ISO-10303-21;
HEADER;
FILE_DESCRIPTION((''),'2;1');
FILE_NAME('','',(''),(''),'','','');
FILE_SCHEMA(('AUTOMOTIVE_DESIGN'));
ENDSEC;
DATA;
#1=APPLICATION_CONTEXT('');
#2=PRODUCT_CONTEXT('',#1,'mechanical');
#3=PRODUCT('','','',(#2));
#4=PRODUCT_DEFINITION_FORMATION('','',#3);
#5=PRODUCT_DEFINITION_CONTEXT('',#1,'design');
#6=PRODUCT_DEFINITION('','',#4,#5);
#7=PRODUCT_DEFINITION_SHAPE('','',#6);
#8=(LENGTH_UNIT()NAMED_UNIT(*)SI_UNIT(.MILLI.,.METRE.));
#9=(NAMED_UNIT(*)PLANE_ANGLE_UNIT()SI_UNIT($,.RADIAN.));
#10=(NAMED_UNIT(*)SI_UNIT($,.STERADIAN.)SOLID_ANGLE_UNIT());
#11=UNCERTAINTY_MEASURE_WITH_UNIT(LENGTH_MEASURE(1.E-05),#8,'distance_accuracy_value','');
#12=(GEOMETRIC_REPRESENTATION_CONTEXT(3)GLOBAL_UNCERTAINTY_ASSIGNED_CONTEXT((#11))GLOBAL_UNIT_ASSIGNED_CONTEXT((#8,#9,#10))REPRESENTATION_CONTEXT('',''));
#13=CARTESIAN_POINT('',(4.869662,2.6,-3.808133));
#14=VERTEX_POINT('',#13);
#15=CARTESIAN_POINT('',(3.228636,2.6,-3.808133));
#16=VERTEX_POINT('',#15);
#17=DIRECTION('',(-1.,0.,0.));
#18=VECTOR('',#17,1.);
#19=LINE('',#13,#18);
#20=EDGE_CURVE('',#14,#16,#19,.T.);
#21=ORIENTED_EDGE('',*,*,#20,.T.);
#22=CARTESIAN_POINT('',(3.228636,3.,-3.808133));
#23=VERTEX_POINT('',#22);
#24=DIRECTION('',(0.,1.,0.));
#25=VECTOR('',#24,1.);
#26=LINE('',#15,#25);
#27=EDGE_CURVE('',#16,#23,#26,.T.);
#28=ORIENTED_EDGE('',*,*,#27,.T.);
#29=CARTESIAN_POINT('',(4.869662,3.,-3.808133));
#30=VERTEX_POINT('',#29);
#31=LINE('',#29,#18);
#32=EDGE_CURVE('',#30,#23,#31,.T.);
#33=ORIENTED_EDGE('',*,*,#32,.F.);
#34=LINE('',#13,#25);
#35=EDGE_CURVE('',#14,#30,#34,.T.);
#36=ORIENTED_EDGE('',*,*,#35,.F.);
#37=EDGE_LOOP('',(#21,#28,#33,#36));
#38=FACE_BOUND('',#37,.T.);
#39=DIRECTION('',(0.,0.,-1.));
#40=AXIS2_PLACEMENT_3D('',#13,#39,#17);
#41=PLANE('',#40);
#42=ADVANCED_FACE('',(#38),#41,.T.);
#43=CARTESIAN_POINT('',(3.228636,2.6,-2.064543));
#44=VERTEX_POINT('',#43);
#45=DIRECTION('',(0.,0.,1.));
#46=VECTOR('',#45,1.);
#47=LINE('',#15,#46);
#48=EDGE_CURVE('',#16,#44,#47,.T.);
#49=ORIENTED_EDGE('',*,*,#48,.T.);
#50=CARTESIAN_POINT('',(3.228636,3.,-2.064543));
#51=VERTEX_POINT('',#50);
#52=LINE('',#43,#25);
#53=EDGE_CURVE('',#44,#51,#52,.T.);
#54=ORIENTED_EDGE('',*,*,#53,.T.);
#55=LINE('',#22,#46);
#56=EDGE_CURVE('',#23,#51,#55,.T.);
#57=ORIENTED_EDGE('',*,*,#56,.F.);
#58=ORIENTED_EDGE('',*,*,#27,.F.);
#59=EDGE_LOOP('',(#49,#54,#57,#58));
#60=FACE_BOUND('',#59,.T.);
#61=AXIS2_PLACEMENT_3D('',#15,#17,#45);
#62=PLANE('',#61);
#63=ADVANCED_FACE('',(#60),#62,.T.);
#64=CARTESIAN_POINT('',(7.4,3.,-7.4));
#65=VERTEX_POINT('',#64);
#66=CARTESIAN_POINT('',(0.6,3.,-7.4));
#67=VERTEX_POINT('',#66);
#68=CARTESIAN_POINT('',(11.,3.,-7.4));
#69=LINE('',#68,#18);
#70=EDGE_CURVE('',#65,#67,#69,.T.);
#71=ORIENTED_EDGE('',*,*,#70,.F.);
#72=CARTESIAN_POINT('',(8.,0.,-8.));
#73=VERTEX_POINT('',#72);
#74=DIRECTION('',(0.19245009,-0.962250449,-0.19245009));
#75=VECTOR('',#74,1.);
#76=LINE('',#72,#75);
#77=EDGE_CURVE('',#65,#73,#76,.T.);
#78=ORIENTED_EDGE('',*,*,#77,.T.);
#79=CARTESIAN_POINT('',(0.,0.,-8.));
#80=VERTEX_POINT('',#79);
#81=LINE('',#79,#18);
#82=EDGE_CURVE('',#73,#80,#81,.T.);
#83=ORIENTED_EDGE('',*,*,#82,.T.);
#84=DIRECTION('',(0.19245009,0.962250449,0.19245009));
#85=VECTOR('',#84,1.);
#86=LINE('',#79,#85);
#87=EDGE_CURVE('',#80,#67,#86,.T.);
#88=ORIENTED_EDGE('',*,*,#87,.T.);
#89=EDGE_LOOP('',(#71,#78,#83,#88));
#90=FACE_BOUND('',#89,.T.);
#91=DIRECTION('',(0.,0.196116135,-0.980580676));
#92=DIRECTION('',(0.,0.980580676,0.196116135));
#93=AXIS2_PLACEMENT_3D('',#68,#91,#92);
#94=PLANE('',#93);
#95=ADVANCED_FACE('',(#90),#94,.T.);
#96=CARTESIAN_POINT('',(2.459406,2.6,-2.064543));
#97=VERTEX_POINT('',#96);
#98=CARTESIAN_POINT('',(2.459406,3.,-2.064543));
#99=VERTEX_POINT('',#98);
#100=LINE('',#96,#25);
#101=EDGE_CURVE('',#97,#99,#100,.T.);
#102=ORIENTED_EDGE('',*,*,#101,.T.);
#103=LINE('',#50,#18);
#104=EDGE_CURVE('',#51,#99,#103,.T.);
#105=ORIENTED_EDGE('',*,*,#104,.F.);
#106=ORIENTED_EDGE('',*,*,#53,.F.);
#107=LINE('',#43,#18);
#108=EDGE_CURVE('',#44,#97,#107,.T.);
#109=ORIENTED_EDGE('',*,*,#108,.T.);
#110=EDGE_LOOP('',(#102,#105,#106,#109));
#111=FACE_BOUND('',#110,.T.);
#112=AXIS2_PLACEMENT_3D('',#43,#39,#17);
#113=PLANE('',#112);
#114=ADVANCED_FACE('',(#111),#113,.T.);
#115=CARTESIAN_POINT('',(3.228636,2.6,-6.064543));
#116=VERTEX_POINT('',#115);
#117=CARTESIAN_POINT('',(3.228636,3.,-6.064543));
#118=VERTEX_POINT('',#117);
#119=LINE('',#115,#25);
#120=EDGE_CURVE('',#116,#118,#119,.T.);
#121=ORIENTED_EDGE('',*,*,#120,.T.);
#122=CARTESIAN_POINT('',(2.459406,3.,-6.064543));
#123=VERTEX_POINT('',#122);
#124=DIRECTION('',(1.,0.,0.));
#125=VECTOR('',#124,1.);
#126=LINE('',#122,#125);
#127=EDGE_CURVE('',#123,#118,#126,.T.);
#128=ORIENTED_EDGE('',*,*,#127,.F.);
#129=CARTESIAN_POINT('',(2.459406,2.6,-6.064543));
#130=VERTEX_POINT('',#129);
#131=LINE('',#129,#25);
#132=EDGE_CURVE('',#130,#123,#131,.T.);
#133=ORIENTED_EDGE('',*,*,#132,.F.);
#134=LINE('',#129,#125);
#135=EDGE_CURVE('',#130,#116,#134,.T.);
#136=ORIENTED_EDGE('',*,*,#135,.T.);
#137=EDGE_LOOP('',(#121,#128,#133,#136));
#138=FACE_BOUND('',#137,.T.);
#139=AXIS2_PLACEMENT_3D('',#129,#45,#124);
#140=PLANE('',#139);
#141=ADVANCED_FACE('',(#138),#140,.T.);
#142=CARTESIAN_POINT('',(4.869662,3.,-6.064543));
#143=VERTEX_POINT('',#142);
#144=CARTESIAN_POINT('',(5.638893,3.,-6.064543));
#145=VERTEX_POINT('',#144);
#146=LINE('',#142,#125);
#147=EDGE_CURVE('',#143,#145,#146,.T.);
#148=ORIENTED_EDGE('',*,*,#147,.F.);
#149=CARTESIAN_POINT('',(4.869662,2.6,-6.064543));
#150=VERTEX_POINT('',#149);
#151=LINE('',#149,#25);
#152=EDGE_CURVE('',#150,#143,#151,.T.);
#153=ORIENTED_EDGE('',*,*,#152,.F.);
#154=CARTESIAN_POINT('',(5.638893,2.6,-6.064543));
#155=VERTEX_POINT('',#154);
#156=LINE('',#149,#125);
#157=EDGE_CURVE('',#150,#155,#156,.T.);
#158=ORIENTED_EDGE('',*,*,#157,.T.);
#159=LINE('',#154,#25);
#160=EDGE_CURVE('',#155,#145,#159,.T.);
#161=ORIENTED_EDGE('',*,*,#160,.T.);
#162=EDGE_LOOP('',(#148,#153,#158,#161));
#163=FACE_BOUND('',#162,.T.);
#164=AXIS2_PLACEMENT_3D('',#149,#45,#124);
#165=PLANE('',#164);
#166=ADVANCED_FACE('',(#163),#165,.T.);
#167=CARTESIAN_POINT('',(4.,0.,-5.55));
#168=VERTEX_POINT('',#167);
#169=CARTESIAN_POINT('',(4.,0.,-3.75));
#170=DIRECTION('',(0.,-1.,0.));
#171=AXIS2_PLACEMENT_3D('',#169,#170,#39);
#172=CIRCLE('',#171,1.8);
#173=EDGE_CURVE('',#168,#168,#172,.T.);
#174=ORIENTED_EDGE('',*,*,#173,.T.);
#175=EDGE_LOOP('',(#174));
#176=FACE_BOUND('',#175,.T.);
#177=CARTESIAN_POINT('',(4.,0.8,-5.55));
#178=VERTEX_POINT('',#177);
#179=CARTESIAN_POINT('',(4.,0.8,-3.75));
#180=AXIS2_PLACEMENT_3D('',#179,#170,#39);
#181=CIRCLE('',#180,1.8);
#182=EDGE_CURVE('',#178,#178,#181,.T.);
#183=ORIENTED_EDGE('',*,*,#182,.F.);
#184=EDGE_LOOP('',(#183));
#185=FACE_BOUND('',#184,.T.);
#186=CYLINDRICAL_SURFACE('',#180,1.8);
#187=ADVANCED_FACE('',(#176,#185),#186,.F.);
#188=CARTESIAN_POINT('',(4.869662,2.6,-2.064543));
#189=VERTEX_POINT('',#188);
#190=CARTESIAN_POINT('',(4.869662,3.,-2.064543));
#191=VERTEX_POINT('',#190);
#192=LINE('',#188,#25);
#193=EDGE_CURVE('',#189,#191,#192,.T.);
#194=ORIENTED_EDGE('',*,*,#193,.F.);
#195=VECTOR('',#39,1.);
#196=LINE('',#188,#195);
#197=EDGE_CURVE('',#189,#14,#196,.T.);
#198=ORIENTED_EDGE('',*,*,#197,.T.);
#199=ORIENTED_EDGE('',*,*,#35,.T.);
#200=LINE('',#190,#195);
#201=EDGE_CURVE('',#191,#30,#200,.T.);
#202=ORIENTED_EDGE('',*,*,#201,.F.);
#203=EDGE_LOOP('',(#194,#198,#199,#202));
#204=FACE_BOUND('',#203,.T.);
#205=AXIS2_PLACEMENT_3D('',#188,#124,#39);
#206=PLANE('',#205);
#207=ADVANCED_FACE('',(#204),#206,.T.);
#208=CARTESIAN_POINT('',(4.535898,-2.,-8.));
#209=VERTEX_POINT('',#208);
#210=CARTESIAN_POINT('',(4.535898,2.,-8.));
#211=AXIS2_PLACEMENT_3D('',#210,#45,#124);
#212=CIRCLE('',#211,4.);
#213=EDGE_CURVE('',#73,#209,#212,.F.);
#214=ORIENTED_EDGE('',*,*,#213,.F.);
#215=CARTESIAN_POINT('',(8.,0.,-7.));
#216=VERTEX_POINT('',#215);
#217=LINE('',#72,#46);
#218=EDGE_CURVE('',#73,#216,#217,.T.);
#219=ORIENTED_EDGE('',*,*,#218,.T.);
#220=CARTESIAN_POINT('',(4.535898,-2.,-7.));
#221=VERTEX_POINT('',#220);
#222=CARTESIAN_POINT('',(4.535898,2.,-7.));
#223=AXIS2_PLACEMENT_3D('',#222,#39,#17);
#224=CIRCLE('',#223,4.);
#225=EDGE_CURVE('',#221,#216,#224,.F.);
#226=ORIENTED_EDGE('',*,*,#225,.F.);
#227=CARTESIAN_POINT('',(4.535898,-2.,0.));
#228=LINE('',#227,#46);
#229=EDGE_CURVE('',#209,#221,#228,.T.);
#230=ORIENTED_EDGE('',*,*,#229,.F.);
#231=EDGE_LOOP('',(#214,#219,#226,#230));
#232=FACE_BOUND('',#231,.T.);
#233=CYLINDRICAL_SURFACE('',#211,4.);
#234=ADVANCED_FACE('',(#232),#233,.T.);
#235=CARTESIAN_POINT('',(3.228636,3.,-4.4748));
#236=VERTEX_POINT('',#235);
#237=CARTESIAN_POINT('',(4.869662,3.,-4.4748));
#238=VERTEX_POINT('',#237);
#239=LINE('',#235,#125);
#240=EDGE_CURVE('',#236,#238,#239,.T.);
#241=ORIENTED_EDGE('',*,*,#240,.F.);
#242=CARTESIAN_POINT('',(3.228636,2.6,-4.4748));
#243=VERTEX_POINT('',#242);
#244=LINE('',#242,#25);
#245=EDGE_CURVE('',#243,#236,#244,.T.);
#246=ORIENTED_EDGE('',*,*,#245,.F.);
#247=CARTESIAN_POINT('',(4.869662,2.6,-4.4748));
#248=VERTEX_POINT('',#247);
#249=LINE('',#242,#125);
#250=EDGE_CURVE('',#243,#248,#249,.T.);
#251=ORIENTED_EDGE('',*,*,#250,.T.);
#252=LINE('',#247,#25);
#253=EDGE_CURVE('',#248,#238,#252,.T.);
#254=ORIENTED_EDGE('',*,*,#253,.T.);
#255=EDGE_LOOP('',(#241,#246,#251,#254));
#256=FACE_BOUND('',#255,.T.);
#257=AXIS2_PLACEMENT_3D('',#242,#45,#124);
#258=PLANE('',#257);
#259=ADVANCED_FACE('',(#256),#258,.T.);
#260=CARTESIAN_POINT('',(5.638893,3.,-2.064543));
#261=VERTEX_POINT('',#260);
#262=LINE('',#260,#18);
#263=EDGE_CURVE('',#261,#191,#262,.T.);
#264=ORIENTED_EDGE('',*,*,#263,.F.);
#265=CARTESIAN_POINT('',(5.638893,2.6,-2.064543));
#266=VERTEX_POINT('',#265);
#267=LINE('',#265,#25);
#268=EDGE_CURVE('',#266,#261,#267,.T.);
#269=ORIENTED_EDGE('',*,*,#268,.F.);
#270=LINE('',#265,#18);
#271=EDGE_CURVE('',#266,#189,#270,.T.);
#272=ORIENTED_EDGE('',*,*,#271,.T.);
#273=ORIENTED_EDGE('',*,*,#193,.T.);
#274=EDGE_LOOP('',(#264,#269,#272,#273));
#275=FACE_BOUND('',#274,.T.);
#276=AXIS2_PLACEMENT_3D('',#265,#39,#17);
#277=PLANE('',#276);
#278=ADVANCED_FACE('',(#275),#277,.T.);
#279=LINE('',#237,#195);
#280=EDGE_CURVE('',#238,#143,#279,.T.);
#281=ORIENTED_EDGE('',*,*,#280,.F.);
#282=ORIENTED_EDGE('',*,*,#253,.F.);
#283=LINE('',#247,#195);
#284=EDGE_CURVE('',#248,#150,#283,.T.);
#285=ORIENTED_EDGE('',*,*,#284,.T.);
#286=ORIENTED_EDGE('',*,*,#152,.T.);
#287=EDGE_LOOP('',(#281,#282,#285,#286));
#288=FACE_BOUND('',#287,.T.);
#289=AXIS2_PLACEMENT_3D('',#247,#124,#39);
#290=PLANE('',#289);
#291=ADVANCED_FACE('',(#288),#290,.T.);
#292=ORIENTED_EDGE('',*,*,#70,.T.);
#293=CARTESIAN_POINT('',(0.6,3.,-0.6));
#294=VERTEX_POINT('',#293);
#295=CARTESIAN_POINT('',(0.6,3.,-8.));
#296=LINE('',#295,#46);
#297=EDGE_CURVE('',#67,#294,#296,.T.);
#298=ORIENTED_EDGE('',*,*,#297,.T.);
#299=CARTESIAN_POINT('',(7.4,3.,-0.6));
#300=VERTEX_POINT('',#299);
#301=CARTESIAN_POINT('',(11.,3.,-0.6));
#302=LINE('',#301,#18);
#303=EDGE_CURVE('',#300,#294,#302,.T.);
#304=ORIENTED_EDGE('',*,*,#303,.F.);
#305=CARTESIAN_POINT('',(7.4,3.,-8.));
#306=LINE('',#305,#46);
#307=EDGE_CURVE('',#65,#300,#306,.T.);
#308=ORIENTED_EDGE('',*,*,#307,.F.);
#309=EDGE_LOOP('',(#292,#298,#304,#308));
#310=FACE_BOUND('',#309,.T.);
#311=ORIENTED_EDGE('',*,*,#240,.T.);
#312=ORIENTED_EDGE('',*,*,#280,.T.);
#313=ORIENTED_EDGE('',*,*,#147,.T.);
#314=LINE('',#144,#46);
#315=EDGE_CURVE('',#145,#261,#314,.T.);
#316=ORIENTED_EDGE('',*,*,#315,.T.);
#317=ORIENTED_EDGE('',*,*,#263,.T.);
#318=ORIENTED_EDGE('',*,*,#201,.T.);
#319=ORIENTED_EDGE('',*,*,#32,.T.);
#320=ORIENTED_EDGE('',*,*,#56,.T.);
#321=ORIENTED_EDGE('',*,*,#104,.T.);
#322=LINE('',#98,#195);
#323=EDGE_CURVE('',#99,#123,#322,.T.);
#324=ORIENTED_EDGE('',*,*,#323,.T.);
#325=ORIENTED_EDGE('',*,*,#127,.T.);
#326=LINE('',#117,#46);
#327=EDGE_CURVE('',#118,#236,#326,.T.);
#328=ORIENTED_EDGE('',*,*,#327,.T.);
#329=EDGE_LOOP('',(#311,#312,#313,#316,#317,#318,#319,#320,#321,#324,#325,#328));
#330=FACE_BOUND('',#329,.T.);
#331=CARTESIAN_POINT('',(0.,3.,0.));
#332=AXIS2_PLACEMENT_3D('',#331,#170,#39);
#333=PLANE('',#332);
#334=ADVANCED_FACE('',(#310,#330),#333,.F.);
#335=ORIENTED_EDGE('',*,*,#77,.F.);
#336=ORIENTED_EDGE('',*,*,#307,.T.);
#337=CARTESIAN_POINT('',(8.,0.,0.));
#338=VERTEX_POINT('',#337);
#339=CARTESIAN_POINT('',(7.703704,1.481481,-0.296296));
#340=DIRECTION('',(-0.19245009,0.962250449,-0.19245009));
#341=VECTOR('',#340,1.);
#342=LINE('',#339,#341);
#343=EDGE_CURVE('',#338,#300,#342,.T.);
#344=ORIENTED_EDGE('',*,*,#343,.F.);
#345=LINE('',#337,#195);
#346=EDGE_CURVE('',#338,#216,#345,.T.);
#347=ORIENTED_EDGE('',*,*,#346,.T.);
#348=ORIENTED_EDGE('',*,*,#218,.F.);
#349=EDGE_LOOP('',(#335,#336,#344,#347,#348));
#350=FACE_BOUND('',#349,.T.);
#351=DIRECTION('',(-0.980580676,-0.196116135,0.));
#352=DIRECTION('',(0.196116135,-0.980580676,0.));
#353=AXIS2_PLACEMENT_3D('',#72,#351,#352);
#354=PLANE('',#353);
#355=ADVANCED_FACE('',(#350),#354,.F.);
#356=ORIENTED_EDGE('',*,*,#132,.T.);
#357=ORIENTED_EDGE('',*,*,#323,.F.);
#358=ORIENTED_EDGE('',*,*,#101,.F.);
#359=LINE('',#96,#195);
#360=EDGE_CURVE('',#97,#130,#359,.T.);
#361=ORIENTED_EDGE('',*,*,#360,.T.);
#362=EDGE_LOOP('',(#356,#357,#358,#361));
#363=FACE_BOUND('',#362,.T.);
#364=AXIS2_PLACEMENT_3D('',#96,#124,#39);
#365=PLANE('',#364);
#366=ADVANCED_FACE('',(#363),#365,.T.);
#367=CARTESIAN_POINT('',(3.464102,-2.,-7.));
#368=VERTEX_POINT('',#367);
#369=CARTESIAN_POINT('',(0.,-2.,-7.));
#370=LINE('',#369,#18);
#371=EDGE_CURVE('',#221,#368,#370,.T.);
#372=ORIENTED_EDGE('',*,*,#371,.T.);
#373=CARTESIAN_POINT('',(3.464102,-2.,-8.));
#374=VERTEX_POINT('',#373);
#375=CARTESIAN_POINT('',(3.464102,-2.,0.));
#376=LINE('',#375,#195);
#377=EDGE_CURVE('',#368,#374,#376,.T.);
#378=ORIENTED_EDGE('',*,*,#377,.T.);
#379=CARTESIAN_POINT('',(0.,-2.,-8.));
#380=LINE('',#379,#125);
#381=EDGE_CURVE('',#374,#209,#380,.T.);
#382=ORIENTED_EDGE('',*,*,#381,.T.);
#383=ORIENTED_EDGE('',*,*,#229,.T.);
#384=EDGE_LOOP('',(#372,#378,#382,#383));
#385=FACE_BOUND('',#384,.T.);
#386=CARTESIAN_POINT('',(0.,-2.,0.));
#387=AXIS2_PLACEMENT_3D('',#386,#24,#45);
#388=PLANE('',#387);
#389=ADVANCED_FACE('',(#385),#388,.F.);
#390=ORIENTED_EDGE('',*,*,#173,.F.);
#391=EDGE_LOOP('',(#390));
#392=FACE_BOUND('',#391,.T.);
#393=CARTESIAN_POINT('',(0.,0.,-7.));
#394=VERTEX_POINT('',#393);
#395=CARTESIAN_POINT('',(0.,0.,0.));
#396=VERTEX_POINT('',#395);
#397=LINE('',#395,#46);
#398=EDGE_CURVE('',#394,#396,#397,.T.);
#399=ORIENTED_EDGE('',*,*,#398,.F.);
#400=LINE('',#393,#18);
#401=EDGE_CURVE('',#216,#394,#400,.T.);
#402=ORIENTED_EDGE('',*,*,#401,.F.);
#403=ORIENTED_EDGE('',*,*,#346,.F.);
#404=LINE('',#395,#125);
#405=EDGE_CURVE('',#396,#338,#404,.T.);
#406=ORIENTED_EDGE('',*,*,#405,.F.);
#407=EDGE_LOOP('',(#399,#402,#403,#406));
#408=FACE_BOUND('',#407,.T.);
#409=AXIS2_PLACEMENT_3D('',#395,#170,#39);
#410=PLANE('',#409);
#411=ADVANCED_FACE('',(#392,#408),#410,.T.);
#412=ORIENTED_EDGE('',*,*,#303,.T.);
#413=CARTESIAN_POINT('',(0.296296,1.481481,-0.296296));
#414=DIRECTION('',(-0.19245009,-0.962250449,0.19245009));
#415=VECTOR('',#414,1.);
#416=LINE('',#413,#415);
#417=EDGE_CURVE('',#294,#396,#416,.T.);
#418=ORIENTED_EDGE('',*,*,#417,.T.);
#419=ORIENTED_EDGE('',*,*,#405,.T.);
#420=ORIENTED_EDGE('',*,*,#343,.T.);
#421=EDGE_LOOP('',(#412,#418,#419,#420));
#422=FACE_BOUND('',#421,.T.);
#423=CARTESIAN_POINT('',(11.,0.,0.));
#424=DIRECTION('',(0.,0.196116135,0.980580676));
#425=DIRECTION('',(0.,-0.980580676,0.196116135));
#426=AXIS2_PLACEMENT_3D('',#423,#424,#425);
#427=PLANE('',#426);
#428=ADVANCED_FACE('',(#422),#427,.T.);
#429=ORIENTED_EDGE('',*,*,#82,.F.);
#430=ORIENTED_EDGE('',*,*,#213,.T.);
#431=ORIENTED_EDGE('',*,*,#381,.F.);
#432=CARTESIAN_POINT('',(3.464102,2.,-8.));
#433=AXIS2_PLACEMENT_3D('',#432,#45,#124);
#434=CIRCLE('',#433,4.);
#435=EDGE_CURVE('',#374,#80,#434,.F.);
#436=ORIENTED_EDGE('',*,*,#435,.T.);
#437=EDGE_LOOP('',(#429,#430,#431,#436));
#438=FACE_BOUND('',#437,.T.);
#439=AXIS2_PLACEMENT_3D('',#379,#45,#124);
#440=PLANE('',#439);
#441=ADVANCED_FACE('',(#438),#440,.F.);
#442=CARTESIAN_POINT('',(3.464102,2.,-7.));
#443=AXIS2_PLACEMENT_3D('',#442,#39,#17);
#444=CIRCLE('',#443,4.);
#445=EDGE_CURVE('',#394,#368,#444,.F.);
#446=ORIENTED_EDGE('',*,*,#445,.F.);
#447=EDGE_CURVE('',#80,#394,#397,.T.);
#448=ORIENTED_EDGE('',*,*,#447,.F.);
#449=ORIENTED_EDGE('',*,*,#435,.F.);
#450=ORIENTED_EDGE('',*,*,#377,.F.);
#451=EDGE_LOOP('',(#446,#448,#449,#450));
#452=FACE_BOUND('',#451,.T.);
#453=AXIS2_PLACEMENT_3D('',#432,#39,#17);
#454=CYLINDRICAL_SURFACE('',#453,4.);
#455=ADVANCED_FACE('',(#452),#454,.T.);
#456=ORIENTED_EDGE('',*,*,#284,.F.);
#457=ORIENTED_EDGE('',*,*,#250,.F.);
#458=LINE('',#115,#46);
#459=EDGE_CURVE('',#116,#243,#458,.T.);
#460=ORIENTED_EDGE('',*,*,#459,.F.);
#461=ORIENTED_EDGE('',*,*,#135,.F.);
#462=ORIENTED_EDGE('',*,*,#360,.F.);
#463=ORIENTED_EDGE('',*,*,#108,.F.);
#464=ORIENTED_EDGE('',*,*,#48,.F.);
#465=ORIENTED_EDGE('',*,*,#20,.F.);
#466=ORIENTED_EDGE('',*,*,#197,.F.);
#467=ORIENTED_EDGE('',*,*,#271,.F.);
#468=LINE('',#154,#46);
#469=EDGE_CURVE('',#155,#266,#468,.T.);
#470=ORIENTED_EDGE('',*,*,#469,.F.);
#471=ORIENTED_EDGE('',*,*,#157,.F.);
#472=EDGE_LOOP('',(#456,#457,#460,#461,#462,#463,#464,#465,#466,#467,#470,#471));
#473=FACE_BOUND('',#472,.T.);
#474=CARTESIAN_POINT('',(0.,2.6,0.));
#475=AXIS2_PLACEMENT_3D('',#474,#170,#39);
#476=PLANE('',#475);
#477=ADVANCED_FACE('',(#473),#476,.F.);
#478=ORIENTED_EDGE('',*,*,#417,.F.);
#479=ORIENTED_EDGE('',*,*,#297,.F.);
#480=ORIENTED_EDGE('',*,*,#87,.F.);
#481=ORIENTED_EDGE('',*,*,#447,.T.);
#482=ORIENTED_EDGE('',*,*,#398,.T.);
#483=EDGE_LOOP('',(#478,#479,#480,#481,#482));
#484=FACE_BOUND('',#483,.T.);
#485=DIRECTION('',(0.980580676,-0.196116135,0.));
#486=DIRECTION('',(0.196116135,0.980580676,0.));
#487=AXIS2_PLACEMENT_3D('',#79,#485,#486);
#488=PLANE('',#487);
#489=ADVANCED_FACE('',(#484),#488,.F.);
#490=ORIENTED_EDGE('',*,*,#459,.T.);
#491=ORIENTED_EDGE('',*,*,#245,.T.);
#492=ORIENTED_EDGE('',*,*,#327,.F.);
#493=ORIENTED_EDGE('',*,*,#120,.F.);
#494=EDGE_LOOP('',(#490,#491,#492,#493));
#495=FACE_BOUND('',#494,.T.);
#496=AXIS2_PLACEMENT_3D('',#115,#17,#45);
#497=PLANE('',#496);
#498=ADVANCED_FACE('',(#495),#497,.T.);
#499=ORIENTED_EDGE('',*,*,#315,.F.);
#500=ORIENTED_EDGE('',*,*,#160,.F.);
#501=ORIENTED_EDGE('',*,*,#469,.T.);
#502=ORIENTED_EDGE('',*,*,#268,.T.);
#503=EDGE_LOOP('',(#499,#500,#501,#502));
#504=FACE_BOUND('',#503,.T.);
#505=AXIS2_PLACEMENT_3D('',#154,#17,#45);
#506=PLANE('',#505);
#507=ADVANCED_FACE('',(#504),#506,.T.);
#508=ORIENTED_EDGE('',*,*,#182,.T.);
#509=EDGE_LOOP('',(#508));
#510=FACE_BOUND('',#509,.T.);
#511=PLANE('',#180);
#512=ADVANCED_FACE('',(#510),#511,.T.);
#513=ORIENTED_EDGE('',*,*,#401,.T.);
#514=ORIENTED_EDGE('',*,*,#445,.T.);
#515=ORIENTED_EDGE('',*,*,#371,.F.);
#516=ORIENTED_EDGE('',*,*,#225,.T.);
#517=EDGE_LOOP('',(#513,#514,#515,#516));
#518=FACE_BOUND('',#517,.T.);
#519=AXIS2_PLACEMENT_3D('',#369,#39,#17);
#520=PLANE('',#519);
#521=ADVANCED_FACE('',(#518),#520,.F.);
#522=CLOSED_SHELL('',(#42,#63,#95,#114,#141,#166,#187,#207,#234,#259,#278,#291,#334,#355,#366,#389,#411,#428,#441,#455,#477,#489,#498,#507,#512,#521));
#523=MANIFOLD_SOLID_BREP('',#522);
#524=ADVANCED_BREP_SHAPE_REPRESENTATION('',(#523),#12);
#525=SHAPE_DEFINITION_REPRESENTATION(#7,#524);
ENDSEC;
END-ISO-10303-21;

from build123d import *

# Parameters (mm, degrees)
SKETCH1_W               = 8
SKETCH1_H               = 8
BOSS_EXTRUDE1_DEPTH     = 3
CUT_EXTRUDE1_DEPTH      = 12.704699911
CUT_EXTRUDE1_DEPTH_BACK = 12.704699911
CUT_EXTRUDE2_DEPTH      = 11
SKETCH4_R               = 1.8
CUT_EXTRUDE3_DEPTH      = 0.8
SKETCH5_W               = 8
SKETCH5_H               = 1
BOSS_EXTRUDE2_DEPTH     = 2
FILLET1_R               = 4
CUT_EXTRUDE4_DEPTH      = 0.4


with BuildPart() as part:
    # Sketch1 → Boss-Extrude1 (new body)
    with BuildSketch(Plane(origin=(0, 0, 0), x_dir=(1, 0, 0), z_dir=(0, 1, 0))):
        with Locations((4, 4)):
            Rectangle(SKETCH1_W, SKETCH1_H)
    extrude(amount=BOSS_EXTRUDE1_DEPTH)

    # Sketch2 → Cut-Extrude1 (cut, two sides: drawn at the far end of the back side and taken through both)
    with BuildSketch(Plane.XY.offset(-CUT_EXTRUDE1_DEPTH_BACK)):
        Polygon((0, 0), (0.6, 3), (0, 3), align=None)
        Polygon((8, 0), (7.4, 3), (8, 3), align=None)
    extrude(amount=CUT_EXTRUDE1_DEPTH + CUT_EXTRUDE1_DEPTH_BACK, mode=Mode.SUBTRACT)

    # Sketch3 → Cut-Extrude2 (cut)
    with BuildSketch(Plane(origin=(0, 0, 0), x_dir=(0, 0, -1), z_dir=(1, 0, 0))):
        Polygon((0, 0), (0.6, 3), (0, 3), align=None)
        Polygon((8, 3), (7.4, 3), (8, 0), align=None)
    extrude(amount=CUT_EXTRUDE2_DEPTH, mode=Mode.SUBTRACT)

    # Sketch4 → Cut-Extrude3 (cut)
    with BuildSketch(Plane.XZ):
        with Locations(Location((4, -3.75, 0), (0, 0, 270))):
            Circle(SKETCH4_R)
    extrude(amount=-CUT_EXTRUDE3_DEPTH, mode=Mode.SUBTRACT)

    # Sketch5 → Boss-Extrude2 (add)
    with BuildSketch(Plane.XZ):
        with Locations((4, -7.5)):
            Rectangle(SKETCH5_W, SKETCH5_H)
    extrude(amount=BOSS_EXTRUDE2_DEPTH)

    # Fillet1
    # the kernel refuses this fillet: 4 mm, written as the material it takes off along each edge
    with BuildSketch(Plane(origin=(8, -2, -16.660254038), x_dir=(0, 1, 0), z_dir=(0, 0, 1)), Plane(origin=(0, -2, 1.660254038), x_dir=(0, 1, 0), z_dir=(0, 0, -1))) as fillet1_piece_1:
        with BuildLine():
            CenterArc((4, 3.464101615), FILLET1_R, 180, 60)
            Line((0, 3.464101615), (-0.08, 3.464101615))
            Line((-0.08, 3.464101615), (-0.08, 0))
            Line((-0.08, 0), (0, -0.08))
            ThreePointArc((0, -0.08), (1, -0.08), (1.96, -0.069282032))
            Line((1.96, -0.069282032), (2, 0))
        make_face()
    extrude(amount=18.320508076, mode=Mode.SUBTRACT)

    # Sketch6 → Cut-Extrude4 (cut)
    with BuildSketch(Plane(origin=(0, 3, 0), x_dir=(1, 0, 0), z_dir=(0, 1, 0))):
        Polygon((2.459405501, 2.064543337), (2.459405501, 6.064543337), (3.22863627, 6.064543337), (3.22863627, 4.474799747), (4.869661911, 4.474799747), (4.869661911, 6.064543337), (5.63889268, 6.064543337), (5.63889268, 2.064543337), (4.869661911, 2.064543337), (4.869661911, 3.80813308), (3.22863627, 3.80813308), (3.22863627, 2.064543337), align=None)
    extrude(amount=-CUT_EXTRUDE4_DEPTH, mode=Mode.SUBTRACT)


solid = part.part
